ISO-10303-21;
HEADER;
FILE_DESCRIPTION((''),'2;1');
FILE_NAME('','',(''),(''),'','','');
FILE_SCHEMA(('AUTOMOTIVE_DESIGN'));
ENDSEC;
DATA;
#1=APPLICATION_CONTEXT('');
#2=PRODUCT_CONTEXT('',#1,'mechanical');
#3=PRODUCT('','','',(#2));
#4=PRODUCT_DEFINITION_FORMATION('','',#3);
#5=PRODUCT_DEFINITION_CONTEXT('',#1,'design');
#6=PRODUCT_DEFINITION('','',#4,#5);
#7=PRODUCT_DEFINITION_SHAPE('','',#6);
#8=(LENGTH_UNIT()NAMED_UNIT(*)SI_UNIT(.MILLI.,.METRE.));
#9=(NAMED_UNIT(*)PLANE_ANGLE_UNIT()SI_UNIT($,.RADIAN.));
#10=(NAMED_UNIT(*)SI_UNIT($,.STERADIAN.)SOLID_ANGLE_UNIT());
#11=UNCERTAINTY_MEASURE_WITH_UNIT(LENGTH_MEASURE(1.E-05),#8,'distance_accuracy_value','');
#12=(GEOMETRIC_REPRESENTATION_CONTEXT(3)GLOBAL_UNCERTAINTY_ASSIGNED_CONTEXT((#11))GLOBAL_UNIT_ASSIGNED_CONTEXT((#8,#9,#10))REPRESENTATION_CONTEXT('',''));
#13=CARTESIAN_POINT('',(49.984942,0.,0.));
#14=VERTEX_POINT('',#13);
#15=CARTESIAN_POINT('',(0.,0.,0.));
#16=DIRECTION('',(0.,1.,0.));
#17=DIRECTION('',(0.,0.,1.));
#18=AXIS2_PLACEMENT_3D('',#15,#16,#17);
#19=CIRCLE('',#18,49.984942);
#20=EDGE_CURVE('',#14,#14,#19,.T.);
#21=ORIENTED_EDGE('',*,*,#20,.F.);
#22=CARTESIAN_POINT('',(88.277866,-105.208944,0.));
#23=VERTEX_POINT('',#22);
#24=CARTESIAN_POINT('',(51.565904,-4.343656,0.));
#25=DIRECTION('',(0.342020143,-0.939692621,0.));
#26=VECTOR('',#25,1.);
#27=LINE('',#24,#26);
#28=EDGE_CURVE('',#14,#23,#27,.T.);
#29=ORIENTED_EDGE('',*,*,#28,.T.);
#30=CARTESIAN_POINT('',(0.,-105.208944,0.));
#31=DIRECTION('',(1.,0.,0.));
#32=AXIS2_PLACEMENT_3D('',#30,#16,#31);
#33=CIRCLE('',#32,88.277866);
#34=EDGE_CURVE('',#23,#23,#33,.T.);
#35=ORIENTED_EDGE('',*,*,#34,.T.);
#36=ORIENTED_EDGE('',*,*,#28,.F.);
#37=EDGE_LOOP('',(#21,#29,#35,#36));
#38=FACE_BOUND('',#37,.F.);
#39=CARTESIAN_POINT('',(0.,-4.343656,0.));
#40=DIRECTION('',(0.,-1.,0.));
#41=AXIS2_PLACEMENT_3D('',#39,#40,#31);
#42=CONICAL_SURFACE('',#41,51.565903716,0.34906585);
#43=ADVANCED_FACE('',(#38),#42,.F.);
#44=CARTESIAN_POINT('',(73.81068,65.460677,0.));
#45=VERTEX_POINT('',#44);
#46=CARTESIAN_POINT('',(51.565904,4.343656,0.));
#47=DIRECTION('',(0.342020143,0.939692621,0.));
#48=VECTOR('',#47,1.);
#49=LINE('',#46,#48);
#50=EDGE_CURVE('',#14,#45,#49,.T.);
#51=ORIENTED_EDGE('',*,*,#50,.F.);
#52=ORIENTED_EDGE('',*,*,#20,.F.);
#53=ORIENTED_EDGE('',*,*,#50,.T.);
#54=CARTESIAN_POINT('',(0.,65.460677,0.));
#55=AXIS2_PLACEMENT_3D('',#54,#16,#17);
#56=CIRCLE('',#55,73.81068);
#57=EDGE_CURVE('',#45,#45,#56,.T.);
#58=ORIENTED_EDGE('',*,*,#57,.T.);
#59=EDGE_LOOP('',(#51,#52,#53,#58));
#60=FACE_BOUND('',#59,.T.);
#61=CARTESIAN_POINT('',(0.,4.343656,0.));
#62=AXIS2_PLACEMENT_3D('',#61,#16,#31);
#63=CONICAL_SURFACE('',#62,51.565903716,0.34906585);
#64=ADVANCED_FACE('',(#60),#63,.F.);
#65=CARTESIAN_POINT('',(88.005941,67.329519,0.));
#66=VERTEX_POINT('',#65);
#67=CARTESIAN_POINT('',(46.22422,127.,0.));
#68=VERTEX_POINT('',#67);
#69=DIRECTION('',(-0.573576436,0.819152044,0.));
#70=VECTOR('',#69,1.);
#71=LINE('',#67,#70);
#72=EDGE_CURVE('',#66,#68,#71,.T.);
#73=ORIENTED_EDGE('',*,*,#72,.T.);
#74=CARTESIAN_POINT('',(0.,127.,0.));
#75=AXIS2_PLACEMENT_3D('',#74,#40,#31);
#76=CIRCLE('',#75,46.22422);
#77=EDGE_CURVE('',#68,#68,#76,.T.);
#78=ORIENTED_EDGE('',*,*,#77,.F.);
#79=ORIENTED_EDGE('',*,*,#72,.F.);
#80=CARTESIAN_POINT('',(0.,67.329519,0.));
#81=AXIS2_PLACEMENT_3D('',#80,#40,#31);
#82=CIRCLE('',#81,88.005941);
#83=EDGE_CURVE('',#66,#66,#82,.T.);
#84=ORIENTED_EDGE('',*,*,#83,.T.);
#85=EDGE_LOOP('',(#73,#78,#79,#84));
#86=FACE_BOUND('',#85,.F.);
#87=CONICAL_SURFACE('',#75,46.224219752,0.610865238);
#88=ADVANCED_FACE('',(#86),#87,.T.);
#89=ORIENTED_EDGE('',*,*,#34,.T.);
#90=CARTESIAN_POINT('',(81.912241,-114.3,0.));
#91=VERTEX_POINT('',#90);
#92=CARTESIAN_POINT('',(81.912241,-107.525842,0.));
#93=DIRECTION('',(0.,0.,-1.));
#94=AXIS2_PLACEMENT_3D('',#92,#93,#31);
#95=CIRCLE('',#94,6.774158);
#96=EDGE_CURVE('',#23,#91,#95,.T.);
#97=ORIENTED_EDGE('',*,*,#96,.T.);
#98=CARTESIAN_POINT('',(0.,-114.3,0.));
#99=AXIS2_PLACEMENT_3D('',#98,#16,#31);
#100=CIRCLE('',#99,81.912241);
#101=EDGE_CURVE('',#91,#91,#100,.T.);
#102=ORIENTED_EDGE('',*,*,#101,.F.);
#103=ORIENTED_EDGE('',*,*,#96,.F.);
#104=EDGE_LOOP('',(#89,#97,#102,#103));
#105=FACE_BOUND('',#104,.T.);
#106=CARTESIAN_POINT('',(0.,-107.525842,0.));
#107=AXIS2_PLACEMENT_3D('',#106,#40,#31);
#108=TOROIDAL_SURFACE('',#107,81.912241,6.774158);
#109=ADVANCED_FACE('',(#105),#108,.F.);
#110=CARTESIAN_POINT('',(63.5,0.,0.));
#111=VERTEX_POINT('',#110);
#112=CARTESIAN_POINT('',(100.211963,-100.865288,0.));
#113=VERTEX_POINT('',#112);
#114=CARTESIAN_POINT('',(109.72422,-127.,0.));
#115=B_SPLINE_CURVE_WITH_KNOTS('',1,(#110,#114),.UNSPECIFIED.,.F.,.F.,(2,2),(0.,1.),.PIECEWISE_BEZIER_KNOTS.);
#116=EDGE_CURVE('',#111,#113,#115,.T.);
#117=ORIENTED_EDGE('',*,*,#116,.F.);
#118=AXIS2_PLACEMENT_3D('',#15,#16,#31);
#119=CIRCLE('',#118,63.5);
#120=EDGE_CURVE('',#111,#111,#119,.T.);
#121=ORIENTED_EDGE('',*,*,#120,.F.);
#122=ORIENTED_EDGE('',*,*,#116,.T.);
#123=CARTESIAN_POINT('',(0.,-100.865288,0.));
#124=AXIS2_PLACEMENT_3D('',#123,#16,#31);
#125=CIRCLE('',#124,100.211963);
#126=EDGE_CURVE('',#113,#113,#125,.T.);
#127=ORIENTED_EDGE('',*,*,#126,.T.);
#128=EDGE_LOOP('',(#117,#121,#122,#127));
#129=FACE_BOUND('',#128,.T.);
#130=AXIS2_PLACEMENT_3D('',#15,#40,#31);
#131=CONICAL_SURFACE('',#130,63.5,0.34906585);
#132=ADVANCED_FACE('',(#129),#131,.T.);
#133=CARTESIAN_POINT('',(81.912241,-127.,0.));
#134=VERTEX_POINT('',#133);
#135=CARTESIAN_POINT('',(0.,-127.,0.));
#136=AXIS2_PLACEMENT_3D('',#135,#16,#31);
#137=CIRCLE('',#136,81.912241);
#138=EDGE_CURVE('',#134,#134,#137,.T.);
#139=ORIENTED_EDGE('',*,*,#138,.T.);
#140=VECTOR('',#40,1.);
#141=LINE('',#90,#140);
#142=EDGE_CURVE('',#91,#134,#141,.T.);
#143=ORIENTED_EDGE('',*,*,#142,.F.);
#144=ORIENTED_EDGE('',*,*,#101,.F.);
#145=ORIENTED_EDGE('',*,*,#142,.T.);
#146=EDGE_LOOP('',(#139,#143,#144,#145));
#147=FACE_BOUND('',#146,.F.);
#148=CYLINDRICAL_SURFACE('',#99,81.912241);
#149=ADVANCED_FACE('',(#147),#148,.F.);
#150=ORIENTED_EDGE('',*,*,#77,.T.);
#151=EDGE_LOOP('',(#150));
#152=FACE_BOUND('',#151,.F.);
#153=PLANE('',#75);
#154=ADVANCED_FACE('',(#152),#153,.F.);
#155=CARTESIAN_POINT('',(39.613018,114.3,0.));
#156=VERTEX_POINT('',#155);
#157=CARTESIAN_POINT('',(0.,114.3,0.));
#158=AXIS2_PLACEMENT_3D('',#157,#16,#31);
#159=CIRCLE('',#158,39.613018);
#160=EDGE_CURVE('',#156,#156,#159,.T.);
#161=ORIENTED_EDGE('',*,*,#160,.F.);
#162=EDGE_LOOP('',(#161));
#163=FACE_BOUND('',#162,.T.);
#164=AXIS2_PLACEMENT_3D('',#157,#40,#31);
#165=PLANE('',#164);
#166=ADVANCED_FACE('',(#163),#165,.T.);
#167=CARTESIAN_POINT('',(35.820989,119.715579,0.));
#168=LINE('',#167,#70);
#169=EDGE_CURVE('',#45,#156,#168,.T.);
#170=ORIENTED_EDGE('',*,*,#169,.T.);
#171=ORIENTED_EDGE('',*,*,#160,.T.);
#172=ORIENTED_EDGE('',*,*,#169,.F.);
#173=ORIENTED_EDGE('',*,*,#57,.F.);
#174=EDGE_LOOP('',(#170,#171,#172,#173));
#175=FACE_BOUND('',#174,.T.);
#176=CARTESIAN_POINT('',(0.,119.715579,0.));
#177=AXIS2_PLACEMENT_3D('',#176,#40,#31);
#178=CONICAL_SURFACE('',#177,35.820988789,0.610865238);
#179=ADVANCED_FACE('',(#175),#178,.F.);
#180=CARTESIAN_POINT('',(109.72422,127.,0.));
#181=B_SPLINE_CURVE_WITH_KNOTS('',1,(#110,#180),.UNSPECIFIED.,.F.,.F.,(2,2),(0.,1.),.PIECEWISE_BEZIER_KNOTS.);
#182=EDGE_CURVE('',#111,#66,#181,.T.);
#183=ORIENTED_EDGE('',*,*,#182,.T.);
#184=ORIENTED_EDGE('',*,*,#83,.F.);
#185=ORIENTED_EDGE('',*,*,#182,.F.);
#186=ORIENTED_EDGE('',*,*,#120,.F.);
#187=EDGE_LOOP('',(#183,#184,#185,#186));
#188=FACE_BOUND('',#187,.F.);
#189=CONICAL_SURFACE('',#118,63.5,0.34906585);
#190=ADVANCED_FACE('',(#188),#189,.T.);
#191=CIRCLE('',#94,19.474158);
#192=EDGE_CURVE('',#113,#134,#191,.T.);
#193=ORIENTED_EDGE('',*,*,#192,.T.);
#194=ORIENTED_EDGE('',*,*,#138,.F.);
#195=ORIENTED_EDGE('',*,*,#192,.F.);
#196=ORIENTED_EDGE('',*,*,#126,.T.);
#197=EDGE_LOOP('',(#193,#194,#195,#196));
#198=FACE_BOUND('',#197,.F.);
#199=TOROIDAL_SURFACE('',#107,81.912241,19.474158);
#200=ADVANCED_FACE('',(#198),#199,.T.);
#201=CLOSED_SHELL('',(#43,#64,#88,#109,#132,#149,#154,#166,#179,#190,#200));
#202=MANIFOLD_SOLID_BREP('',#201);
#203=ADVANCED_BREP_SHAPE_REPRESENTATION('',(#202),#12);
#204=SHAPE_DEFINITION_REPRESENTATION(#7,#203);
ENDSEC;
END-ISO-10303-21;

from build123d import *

# Parameters (mm, degrees)
F0_R     = 63.5
F1_DEPTH = 127
F1_TAPER = -20
F2_R     = 19.4741575124
F3_SIZE  = 63.5
F4_T     = -12.7


# Not quite as in the source:
# - a shell that OpenCascade refuses in one call is made with other operations: the cavity is built on its own and cut out


with BuildPart() as f1:
    # F0 (on Front) → F1 (new body, symmetric)
    with BuildSketch(Plane.XZ):
        Circle(F0_R)
    extrude(amount=F1_DEPTH, both=True, taper=F1_TAPER)

    # F2
    f2_edges = [f1.edges().sort_by_distance(p)[0] for p in [
        (-109.72422, -127, 0),
    ]]
    fillet(f2_edges, radius=F2_R)

    # F3
    f3_edges = [f1.edges().sort_by_distance(p)[0] for p in [
        (-109.72422, 127, 0),
    ]]
    chamfer(f3_edges, length=F3_SIZE)

    # F4: a shell. OpenCascade refuses it in one call, so the cavity is built on its own and cut out:
    # the body offset inwards by the wall thickness, plus a prism from it out through each open face.
    f4_core = offset(f1.part, amount=F4_T, kind=Kind.INTERSECTION, mode=Mode.PRIVATE)
    f4_exits = [f4_core.faces().sort_by_distance(p)[0] for p in [
        (0, -114.3, 0),
    ]]
    add(f4_core, mode=Mode.SUBTRACT)
    extrude(f4_exits, amount=-F4_T, mode=Mode.SUBTRACT)


solid = f1.part
